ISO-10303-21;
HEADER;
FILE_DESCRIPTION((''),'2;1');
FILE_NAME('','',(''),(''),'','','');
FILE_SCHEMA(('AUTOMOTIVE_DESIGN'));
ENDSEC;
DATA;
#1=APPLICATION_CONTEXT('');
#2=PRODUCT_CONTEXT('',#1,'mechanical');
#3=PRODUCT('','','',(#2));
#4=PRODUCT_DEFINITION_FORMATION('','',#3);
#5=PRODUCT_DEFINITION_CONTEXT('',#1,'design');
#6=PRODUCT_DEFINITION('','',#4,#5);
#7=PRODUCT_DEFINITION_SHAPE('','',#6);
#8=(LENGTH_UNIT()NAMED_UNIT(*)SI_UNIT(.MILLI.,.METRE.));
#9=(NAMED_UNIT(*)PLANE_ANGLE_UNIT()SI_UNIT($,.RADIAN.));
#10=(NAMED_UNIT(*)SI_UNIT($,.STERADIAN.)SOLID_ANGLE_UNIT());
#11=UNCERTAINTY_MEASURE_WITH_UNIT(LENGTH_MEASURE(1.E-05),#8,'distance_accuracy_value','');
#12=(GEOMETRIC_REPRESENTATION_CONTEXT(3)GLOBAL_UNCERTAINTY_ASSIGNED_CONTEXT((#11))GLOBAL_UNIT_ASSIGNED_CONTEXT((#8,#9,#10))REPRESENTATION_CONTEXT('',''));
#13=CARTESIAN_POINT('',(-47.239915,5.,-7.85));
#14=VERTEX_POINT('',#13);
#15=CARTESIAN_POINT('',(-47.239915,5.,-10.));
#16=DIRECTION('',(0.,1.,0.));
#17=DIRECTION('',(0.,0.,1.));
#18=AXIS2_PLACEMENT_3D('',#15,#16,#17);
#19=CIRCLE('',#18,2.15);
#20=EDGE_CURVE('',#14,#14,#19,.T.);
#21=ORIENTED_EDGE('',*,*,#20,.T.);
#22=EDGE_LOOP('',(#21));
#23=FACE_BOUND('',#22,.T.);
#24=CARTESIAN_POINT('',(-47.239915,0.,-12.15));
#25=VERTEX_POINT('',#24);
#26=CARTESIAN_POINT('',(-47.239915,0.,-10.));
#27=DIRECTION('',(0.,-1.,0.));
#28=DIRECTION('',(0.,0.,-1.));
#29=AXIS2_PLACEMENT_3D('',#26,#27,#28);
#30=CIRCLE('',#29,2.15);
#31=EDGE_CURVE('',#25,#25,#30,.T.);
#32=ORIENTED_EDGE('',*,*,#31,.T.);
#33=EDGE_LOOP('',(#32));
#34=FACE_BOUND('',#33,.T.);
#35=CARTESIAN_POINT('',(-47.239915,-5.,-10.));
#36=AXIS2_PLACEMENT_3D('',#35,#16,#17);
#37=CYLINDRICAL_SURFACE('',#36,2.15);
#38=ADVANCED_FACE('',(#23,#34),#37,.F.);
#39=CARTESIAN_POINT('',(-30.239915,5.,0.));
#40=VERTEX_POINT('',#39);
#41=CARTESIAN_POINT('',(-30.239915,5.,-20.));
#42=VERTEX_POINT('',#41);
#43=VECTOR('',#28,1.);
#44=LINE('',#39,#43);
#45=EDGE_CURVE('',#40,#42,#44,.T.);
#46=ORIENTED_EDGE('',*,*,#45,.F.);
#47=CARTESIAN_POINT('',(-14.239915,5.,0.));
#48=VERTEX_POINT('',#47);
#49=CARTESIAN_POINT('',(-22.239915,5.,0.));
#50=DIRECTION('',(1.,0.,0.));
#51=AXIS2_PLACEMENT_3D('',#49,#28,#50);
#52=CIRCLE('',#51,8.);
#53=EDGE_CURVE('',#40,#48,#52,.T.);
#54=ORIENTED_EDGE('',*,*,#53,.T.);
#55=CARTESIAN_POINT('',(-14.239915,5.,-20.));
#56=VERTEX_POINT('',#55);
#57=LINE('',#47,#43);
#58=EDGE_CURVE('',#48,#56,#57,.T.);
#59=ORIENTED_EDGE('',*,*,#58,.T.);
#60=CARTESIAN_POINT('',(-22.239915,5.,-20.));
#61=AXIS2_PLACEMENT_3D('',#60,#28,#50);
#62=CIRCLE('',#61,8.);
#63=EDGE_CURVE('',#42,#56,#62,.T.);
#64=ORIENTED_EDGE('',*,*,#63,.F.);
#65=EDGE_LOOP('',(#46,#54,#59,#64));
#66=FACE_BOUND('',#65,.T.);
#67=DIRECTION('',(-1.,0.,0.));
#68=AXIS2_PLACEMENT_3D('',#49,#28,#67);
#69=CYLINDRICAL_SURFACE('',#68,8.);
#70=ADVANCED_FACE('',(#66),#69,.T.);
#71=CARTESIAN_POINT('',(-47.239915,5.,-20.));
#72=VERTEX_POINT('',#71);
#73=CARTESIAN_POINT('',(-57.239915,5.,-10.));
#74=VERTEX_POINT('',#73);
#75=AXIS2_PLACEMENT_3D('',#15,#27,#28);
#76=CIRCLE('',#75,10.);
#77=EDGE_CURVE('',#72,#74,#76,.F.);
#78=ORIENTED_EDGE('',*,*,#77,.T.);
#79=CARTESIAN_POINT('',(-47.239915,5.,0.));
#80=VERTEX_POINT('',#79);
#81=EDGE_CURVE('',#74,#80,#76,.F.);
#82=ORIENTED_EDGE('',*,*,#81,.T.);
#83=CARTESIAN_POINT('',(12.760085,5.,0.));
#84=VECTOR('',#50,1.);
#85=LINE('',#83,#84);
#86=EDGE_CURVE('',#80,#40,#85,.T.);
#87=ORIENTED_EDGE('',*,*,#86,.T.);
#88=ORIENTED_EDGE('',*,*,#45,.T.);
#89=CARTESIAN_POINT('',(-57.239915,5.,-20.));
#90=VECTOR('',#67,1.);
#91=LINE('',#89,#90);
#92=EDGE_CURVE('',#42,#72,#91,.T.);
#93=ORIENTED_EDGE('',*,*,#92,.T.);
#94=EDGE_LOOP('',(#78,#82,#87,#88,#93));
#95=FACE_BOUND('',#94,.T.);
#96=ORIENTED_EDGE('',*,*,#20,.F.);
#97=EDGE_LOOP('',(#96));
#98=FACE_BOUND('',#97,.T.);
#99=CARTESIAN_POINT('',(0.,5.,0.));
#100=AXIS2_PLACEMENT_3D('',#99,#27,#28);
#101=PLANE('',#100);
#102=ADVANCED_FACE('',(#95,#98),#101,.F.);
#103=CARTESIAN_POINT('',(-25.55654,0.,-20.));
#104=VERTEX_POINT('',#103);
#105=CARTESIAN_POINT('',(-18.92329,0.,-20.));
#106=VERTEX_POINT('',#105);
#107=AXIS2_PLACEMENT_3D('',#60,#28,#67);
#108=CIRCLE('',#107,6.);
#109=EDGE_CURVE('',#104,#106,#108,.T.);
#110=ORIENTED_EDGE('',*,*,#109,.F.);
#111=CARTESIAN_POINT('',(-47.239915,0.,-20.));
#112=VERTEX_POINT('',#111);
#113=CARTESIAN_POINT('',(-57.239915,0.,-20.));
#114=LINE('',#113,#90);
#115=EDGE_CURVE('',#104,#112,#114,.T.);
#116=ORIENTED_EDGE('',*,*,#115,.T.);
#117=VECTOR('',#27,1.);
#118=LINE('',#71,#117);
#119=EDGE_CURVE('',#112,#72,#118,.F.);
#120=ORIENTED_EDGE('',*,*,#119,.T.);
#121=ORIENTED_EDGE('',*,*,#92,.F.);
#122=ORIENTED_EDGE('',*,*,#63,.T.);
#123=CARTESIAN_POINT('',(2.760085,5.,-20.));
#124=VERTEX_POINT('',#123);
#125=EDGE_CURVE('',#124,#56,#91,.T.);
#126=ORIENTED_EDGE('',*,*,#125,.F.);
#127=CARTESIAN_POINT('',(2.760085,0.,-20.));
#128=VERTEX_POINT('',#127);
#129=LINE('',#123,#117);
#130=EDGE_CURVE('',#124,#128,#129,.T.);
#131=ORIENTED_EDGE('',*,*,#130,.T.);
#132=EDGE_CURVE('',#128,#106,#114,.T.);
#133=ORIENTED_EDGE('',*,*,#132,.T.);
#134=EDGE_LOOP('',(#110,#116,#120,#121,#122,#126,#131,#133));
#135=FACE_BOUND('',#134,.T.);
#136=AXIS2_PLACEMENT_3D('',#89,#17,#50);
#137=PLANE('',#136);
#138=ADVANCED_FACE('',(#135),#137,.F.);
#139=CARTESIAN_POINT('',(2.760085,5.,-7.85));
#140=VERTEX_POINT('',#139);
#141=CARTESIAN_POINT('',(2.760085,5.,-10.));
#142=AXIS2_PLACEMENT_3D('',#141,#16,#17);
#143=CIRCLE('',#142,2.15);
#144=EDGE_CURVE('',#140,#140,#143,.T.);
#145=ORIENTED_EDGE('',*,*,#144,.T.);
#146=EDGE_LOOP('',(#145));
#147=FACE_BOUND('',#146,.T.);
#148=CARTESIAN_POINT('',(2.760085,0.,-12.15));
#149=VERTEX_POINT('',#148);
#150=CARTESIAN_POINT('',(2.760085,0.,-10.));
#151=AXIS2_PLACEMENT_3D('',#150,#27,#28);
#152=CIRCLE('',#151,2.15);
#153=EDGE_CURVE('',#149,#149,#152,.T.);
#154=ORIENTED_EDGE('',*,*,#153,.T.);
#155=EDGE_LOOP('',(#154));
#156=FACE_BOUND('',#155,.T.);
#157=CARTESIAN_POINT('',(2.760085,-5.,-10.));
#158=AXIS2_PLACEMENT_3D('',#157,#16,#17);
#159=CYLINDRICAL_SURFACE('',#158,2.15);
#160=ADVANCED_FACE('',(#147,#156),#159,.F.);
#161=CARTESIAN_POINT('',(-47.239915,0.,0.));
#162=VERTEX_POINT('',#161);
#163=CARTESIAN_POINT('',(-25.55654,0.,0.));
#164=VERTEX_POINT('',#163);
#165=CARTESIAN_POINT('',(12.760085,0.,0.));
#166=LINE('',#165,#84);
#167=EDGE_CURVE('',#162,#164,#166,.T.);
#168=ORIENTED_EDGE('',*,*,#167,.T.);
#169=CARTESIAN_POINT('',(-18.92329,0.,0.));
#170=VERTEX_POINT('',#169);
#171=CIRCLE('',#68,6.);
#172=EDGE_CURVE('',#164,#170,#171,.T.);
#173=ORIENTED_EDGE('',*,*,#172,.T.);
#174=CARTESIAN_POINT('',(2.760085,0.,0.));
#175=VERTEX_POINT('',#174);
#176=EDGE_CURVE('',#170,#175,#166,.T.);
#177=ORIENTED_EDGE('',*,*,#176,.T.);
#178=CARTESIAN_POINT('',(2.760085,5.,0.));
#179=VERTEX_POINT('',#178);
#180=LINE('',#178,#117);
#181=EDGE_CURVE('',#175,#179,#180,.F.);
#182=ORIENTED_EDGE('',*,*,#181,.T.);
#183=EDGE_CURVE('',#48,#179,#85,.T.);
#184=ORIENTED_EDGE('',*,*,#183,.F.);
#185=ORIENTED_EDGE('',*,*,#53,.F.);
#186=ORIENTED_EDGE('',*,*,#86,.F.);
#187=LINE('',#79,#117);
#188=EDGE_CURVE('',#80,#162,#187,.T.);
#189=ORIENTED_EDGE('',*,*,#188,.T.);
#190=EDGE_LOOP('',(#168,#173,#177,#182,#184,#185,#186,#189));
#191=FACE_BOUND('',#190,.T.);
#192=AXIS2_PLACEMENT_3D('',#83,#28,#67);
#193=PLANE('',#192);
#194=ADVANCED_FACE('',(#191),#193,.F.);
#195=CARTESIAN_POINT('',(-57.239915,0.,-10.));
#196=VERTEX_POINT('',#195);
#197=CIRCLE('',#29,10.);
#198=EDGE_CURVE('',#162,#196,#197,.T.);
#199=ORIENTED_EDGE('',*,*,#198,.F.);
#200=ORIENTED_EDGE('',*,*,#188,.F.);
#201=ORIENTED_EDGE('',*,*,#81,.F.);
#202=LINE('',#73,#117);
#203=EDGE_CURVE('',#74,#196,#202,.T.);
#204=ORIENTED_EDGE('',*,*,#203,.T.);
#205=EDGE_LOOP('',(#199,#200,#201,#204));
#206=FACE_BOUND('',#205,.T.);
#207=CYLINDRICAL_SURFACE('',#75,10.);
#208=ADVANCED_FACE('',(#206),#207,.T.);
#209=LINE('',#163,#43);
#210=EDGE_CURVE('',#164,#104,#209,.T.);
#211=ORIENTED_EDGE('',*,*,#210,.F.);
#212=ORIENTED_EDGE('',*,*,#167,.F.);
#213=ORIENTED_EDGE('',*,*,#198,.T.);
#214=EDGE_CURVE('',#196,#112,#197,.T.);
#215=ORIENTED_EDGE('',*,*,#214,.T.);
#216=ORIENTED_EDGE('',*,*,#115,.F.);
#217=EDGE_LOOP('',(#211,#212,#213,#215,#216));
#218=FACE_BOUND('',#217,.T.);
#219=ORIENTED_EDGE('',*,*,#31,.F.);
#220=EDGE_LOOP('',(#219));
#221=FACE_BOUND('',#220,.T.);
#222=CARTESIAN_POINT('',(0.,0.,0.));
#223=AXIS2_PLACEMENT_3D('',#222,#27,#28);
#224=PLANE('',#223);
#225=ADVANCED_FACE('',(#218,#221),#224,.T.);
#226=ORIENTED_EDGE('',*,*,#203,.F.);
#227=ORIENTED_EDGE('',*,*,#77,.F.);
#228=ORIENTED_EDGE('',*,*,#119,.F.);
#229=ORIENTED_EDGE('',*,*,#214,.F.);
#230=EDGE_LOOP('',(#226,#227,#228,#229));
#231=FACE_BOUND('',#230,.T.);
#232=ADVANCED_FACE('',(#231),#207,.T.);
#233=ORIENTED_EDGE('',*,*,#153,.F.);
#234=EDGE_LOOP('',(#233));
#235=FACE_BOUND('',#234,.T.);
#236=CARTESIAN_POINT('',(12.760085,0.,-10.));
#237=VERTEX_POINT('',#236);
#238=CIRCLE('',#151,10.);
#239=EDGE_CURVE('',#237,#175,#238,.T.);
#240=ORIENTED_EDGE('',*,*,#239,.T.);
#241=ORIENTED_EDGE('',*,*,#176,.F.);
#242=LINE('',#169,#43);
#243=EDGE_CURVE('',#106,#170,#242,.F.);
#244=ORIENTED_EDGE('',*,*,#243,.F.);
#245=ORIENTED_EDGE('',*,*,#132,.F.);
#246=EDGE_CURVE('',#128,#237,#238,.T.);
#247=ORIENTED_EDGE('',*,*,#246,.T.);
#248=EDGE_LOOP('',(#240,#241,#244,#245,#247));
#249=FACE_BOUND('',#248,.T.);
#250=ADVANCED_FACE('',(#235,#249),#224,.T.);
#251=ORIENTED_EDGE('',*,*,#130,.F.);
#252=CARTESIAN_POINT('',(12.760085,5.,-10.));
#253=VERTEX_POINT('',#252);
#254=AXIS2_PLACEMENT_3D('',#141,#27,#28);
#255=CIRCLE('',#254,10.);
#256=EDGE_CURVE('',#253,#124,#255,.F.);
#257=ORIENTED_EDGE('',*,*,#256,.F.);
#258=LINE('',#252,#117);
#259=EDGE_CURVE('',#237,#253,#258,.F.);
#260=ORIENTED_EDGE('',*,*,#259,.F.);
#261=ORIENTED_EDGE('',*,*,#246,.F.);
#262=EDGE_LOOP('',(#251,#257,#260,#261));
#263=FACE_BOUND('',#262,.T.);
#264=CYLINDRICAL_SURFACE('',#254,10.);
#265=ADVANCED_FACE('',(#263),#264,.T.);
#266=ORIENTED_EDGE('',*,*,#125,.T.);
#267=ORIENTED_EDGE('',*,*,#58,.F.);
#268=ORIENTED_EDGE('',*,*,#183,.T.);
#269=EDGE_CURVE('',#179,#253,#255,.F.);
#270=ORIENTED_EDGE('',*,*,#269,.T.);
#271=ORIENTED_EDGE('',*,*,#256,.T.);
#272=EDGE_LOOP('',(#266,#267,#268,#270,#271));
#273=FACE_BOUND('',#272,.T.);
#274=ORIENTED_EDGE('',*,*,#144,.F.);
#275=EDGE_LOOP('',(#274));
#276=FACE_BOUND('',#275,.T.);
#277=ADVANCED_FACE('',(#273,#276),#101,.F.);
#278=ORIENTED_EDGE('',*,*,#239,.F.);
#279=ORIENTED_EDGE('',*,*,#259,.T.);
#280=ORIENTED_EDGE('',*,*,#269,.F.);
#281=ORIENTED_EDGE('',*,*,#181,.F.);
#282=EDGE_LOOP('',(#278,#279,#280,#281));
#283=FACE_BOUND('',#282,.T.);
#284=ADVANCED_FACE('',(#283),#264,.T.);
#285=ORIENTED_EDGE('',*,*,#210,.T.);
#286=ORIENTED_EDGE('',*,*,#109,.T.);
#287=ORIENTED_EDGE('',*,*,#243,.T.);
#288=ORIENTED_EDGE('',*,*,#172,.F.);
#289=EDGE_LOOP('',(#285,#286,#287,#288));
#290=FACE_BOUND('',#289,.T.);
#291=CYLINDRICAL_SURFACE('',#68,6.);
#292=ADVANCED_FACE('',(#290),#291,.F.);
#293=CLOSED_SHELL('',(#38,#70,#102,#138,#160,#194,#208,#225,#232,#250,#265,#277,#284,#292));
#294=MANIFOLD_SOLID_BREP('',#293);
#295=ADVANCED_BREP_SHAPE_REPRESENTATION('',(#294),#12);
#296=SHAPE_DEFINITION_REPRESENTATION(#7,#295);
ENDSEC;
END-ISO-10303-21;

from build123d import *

# Parameters (mm, degrees)
SKETCH1_W           = 70
SKETCH1_H           = 20
BOSS_EXTRUDE1_DEPTH = 5
FILLET1_R           = 10
SKETCH2_R           = 2.15
CUT_EXTRUDE1_DEPTH  = 10
BOSS_EXTRUDE2_DEPTH = 20
SKETCH6_R           = 6
CUT_EXTRUDE3_DEPTH  = 20


with BuildPart() as part:
    # Sketch1 → Boss-Extrude1 (new body)
    with BuildSketch(Plane(origin=(0, 0, 0), x_dir=(1, 0, 0), z_dir=(0, 1, 0))):
        with Locations((-22.239915074, 10)):
            Rectangle(SKETCH1_W, SKETCH1_H)
    extrude(amount=BOSS_EXTRUDE1_DEPTH)

    # Fillet1
    fillet1_edges = [part.edges().sort_by_distance(p)[0] for p in [
        (12.760084926, 2.5, 0),
        (12.760084926, 2.5, -20),
        (-57.239915074, 2.5, 0),
        (-57.239915074, 2.5, -20),
    ]]
    fillet(fillet1_edges, radius=FILLET1_R - 0.0001)  # a hair under: the kernel refuses the full size

    # Sketch2 → Cut-Extrude1 (cut)
    with BuildSketch(Plane(origin=(0, 5, 0), x_dir=(1, 0, 0), z_dir=(0, 1, 0))):
        with Locations(Location((-47.239915074, 10, 0), (0, 0, 270))):
            Circle(SKETCH2_R)
        with Locations(Location((2.760084926, 10, 0), (0, 0, 270))):
            Circle(SKETCH2_R)
    extrude(amount=-CUT_EXTRUDE1_DEPTH, mode=Mode.SUBTRACT)

    # Sketch3 → Boss-Extrude2 (add)
    with BuildSketch(Plane(origin=(0, 0, -20), x_dir=(-1, 0, 0), z_dir=(0, 0, -1))):
        with BuildLine():
            Line((14.239915074, 5), (30.239915074, 5))
            ThreePointArc((30.239915074, 5), (22.239915074, 13), (14.239915074, 5))
        make_face()
    extrude(amount=-BOSS_EXTRUDE2_DEPTH)

    # Sketch6 → Cut-Extrude3 (cut)
    with BuildSketch(Plane(origin=(0, 0, -20), x_dir=(-1, 0, 0), z_dir=(0, 0, -1))):
        with Locations((22.239915074, 5)):
            Circle(SKETCH6_R)
    extrude(amount=-CUT_EXTRUDE3_DEPTH, mode=Mode.SUBTRACT)


solid = part.part
